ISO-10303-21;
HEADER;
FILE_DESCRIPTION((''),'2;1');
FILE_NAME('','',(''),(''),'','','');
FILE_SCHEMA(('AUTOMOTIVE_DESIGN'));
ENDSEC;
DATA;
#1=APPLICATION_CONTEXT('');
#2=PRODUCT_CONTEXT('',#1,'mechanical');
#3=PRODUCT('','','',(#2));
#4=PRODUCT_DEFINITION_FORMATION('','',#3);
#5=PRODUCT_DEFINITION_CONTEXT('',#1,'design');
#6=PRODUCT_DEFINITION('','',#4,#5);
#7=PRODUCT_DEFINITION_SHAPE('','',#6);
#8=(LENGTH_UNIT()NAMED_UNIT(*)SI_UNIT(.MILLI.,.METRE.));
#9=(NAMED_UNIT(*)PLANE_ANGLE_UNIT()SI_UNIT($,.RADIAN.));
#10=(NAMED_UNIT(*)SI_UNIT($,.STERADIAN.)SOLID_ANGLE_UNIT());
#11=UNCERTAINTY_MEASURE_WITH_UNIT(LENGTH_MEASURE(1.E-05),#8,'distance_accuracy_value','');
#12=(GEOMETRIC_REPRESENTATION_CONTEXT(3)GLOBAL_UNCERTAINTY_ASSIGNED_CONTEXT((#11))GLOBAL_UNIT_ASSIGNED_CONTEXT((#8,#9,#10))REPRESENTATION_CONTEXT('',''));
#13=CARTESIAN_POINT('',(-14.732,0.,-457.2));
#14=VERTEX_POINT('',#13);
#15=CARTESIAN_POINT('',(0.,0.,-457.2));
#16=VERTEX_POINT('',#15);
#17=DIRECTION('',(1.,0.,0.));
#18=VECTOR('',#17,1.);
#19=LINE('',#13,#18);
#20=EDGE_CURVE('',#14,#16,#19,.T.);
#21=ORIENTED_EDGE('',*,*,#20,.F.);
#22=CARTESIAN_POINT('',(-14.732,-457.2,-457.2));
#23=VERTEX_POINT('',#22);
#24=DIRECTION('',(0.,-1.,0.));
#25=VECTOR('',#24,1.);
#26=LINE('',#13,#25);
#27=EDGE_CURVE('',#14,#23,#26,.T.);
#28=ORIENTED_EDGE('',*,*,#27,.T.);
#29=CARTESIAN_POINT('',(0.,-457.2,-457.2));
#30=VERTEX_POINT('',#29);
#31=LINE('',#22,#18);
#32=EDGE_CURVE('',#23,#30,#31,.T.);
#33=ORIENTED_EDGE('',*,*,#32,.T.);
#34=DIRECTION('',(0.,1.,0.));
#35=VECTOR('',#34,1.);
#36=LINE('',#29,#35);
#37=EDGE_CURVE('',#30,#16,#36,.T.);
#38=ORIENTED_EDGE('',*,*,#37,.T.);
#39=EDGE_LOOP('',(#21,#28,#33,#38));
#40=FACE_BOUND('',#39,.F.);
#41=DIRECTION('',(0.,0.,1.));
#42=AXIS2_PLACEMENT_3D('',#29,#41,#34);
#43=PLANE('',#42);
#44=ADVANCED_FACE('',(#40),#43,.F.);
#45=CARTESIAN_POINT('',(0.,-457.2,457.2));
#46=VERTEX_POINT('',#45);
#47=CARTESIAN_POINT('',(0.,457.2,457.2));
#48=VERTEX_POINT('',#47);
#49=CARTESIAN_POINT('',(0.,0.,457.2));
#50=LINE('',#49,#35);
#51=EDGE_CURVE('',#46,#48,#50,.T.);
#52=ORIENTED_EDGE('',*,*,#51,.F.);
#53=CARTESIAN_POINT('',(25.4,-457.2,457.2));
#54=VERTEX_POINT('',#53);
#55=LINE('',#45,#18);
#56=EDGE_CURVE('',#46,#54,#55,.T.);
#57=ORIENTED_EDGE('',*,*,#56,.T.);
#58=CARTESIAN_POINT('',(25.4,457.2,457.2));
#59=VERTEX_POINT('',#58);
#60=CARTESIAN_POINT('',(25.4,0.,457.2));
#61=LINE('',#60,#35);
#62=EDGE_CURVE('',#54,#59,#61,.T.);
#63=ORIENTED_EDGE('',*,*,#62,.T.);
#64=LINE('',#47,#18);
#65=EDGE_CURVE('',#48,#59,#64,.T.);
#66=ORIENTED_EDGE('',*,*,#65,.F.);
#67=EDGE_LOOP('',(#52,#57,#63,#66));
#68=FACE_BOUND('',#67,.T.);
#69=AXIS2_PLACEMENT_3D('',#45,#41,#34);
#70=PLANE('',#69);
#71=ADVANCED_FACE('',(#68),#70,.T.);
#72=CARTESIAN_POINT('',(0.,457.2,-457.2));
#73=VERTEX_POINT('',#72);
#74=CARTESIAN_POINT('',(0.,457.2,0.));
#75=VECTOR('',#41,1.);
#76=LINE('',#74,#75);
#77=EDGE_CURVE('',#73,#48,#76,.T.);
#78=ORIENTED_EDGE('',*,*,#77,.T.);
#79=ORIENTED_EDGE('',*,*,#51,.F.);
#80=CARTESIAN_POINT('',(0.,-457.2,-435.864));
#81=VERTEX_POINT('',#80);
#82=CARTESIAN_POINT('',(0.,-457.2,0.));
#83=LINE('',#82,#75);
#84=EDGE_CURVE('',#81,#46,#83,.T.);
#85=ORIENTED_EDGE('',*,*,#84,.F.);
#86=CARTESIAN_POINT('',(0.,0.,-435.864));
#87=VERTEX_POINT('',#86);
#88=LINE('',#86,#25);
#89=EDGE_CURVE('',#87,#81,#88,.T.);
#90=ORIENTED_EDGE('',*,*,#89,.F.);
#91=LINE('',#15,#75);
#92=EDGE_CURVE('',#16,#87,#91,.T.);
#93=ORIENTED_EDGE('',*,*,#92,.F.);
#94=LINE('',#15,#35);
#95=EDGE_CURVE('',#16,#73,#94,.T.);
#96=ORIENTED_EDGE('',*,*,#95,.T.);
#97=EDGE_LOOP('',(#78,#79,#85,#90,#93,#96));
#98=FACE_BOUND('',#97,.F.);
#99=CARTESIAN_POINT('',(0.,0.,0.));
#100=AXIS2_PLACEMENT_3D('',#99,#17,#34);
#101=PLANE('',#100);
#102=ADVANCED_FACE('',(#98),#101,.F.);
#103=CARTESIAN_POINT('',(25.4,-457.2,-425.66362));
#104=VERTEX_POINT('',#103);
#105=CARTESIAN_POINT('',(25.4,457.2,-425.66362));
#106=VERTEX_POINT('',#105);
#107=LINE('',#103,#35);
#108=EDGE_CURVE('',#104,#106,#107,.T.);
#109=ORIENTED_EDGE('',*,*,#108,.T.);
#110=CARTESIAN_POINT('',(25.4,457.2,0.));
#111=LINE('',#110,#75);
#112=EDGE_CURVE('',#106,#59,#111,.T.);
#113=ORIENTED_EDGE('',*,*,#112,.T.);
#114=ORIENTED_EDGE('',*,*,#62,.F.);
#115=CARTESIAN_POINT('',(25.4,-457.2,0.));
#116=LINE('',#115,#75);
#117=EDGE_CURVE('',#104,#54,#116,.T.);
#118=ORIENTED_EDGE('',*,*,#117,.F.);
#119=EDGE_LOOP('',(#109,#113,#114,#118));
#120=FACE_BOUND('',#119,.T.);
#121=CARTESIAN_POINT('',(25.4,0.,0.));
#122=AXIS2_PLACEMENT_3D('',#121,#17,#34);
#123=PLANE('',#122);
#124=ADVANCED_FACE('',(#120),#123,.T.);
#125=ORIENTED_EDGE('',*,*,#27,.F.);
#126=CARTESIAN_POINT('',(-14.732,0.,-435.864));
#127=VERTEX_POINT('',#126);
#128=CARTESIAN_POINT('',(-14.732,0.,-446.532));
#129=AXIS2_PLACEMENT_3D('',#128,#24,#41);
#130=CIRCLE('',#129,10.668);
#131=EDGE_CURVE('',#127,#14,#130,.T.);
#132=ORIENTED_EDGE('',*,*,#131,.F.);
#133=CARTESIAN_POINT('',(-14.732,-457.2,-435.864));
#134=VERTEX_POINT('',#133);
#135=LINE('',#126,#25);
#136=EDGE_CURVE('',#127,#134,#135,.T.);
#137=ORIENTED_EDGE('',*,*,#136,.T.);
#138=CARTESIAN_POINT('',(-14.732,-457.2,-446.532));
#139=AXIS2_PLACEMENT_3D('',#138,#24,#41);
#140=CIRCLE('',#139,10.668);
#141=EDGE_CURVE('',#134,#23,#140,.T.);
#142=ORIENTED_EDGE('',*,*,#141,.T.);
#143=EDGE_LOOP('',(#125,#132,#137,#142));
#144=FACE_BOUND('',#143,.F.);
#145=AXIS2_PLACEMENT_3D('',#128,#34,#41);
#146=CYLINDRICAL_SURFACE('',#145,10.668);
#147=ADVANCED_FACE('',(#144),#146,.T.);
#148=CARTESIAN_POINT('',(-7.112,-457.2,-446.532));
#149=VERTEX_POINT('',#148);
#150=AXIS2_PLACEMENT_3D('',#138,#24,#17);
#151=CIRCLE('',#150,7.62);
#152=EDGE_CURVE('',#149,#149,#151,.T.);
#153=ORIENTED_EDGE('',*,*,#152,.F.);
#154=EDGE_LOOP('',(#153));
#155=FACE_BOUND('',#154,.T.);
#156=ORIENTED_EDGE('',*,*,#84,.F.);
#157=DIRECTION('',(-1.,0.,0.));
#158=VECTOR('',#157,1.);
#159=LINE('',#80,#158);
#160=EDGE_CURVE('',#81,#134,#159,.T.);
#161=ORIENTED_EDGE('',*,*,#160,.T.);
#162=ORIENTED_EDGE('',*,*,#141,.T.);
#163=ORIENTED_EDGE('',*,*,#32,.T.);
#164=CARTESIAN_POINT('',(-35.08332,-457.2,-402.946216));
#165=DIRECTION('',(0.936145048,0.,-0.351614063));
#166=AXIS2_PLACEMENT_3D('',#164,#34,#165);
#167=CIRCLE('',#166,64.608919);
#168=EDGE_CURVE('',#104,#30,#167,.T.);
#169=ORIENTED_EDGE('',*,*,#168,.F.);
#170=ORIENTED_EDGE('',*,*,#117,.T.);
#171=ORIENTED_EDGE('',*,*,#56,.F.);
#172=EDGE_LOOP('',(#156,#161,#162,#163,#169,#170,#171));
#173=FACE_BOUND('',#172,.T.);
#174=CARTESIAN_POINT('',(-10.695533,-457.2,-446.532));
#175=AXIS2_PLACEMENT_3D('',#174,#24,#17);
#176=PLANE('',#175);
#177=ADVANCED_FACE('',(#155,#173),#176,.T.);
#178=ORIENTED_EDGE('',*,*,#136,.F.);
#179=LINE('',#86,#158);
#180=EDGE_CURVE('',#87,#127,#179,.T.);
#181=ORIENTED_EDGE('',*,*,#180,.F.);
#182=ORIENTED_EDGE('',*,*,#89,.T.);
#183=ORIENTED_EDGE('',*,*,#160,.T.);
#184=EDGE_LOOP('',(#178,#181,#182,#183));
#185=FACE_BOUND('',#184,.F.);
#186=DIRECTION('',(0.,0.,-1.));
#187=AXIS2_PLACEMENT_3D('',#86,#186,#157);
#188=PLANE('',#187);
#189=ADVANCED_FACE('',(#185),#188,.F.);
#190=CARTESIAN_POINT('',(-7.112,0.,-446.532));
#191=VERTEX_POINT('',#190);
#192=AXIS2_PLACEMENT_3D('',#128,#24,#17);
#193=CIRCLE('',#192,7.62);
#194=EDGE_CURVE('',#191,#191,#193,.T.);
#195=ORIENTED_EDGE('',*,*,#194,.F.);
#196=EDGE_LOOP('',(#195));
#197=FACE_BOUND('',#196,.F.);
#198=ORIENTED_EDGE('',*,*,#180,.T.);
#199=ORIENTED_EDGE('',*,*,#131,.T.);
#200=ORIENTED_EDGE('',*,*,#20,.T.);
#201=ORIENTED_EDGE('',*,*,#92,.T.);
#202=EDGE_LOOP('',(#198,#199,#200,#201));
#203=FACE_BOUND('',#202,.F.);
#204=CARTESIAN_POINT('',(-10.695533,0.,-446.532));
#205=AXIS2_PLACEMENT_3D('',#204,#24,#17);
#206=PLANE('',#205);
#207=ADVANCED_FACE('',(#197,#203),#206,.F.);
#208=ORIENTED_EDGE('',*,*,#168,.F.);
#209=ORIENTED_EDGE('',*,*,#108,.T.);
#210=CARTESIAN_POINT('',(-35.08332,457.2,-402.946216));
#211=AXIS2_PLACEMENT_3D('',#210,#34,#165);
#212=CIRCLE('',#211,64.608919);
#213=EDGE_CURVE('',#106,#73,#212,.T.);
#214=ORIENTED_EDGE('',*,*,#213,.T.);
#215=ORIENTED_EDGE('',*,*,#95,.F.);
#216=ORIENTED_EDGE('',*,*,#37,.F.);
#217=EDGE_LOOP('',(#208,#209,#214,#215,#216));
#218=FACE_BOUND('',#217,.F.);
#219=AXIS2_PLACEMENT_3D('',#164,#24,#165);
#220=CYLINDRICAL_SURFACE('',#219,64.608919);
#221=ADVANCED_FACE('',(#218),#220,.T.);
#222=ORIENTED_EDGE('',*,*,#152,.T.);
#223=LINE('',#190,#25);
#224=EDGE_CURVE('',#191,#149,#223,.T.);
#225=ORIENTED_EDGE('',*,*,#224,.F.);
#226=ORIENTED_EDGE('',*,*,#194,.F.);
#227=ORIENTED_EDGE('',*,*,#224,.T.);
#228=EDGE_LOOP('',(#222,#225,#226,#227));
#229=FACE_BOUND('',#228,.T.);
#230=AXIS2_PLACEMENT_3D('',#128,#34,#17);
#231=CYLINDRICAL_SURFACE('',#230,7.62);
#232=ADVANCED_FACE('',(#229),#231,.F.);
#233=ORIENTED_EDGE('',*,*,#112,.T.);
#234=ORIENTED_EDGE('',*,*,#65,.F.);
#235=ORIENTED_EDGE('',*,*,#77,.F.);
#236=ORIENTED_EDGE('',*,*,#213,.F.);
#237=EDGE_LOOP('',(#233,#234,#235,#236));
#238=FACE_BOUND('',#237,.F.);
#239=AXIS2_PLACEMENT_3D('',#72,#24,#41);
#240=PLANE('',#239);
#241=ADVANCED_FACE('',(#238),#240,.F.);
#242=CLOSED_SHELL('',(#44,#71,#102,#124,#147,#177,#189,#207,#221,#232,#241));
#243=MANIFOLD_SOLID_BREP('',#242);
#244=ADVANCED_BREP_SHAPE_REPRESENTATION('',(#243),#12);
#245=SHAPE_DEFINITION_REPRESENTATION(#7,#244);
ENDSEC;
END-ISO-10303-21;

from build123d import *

# Parameters (mm, degrees)
F0_W     = 914.4
F0_H     = 914.4
F1_DEPTH = 25.4
F2_R     = 7.62
F3_DEPTH = 457.2
F5_DEPTH = 914.4


with BuildPart() as f1:
    # F0 (on Right) → F1 (new body)
    with BuildSketch(Plane.YZ):
        Rectangle(F0_W, F0_H)
    extrude(amount=F1_DEPTH)

    # F2 (on Front) → F3 (join, through all)
    with BuildSketch(Plane.XZ):
        with BuildLine():
            Line((0, -435.864), (-14.732, -435.864))
            ThreePointArc((-14.732, -435.864), (-25.4, -446.532), (-14.732, -457.2))
            Line((-14.732, -457.2), (0, -457.2))
            Line((0, -457.2), (0, -435.864))
        make_face()
        with Locations((-14.732, -446.532)):
            Circle(F2_R, mode=Mode.SUBTRACT)
    extrude(amount=F3_DEPTH)

    # F4 (on face) → F5 (cut, through all)
    with BuildSketch(Plane.XZ.offset(457.2)):
        with BuildLine():
            ThreePointArc((25.4, -425.6636202335), (15.2344848329, -443.4731324002), (0, -457.2))
            Line((0, -457.2), (25.4, -457.2))
            Line((25.4, -457.2), (25.4, -425.6636202335))
        make_face()
    extrude(amount=-F5_DEPTH, mode=Mode.SUBTRACT)


solid = f1.part
